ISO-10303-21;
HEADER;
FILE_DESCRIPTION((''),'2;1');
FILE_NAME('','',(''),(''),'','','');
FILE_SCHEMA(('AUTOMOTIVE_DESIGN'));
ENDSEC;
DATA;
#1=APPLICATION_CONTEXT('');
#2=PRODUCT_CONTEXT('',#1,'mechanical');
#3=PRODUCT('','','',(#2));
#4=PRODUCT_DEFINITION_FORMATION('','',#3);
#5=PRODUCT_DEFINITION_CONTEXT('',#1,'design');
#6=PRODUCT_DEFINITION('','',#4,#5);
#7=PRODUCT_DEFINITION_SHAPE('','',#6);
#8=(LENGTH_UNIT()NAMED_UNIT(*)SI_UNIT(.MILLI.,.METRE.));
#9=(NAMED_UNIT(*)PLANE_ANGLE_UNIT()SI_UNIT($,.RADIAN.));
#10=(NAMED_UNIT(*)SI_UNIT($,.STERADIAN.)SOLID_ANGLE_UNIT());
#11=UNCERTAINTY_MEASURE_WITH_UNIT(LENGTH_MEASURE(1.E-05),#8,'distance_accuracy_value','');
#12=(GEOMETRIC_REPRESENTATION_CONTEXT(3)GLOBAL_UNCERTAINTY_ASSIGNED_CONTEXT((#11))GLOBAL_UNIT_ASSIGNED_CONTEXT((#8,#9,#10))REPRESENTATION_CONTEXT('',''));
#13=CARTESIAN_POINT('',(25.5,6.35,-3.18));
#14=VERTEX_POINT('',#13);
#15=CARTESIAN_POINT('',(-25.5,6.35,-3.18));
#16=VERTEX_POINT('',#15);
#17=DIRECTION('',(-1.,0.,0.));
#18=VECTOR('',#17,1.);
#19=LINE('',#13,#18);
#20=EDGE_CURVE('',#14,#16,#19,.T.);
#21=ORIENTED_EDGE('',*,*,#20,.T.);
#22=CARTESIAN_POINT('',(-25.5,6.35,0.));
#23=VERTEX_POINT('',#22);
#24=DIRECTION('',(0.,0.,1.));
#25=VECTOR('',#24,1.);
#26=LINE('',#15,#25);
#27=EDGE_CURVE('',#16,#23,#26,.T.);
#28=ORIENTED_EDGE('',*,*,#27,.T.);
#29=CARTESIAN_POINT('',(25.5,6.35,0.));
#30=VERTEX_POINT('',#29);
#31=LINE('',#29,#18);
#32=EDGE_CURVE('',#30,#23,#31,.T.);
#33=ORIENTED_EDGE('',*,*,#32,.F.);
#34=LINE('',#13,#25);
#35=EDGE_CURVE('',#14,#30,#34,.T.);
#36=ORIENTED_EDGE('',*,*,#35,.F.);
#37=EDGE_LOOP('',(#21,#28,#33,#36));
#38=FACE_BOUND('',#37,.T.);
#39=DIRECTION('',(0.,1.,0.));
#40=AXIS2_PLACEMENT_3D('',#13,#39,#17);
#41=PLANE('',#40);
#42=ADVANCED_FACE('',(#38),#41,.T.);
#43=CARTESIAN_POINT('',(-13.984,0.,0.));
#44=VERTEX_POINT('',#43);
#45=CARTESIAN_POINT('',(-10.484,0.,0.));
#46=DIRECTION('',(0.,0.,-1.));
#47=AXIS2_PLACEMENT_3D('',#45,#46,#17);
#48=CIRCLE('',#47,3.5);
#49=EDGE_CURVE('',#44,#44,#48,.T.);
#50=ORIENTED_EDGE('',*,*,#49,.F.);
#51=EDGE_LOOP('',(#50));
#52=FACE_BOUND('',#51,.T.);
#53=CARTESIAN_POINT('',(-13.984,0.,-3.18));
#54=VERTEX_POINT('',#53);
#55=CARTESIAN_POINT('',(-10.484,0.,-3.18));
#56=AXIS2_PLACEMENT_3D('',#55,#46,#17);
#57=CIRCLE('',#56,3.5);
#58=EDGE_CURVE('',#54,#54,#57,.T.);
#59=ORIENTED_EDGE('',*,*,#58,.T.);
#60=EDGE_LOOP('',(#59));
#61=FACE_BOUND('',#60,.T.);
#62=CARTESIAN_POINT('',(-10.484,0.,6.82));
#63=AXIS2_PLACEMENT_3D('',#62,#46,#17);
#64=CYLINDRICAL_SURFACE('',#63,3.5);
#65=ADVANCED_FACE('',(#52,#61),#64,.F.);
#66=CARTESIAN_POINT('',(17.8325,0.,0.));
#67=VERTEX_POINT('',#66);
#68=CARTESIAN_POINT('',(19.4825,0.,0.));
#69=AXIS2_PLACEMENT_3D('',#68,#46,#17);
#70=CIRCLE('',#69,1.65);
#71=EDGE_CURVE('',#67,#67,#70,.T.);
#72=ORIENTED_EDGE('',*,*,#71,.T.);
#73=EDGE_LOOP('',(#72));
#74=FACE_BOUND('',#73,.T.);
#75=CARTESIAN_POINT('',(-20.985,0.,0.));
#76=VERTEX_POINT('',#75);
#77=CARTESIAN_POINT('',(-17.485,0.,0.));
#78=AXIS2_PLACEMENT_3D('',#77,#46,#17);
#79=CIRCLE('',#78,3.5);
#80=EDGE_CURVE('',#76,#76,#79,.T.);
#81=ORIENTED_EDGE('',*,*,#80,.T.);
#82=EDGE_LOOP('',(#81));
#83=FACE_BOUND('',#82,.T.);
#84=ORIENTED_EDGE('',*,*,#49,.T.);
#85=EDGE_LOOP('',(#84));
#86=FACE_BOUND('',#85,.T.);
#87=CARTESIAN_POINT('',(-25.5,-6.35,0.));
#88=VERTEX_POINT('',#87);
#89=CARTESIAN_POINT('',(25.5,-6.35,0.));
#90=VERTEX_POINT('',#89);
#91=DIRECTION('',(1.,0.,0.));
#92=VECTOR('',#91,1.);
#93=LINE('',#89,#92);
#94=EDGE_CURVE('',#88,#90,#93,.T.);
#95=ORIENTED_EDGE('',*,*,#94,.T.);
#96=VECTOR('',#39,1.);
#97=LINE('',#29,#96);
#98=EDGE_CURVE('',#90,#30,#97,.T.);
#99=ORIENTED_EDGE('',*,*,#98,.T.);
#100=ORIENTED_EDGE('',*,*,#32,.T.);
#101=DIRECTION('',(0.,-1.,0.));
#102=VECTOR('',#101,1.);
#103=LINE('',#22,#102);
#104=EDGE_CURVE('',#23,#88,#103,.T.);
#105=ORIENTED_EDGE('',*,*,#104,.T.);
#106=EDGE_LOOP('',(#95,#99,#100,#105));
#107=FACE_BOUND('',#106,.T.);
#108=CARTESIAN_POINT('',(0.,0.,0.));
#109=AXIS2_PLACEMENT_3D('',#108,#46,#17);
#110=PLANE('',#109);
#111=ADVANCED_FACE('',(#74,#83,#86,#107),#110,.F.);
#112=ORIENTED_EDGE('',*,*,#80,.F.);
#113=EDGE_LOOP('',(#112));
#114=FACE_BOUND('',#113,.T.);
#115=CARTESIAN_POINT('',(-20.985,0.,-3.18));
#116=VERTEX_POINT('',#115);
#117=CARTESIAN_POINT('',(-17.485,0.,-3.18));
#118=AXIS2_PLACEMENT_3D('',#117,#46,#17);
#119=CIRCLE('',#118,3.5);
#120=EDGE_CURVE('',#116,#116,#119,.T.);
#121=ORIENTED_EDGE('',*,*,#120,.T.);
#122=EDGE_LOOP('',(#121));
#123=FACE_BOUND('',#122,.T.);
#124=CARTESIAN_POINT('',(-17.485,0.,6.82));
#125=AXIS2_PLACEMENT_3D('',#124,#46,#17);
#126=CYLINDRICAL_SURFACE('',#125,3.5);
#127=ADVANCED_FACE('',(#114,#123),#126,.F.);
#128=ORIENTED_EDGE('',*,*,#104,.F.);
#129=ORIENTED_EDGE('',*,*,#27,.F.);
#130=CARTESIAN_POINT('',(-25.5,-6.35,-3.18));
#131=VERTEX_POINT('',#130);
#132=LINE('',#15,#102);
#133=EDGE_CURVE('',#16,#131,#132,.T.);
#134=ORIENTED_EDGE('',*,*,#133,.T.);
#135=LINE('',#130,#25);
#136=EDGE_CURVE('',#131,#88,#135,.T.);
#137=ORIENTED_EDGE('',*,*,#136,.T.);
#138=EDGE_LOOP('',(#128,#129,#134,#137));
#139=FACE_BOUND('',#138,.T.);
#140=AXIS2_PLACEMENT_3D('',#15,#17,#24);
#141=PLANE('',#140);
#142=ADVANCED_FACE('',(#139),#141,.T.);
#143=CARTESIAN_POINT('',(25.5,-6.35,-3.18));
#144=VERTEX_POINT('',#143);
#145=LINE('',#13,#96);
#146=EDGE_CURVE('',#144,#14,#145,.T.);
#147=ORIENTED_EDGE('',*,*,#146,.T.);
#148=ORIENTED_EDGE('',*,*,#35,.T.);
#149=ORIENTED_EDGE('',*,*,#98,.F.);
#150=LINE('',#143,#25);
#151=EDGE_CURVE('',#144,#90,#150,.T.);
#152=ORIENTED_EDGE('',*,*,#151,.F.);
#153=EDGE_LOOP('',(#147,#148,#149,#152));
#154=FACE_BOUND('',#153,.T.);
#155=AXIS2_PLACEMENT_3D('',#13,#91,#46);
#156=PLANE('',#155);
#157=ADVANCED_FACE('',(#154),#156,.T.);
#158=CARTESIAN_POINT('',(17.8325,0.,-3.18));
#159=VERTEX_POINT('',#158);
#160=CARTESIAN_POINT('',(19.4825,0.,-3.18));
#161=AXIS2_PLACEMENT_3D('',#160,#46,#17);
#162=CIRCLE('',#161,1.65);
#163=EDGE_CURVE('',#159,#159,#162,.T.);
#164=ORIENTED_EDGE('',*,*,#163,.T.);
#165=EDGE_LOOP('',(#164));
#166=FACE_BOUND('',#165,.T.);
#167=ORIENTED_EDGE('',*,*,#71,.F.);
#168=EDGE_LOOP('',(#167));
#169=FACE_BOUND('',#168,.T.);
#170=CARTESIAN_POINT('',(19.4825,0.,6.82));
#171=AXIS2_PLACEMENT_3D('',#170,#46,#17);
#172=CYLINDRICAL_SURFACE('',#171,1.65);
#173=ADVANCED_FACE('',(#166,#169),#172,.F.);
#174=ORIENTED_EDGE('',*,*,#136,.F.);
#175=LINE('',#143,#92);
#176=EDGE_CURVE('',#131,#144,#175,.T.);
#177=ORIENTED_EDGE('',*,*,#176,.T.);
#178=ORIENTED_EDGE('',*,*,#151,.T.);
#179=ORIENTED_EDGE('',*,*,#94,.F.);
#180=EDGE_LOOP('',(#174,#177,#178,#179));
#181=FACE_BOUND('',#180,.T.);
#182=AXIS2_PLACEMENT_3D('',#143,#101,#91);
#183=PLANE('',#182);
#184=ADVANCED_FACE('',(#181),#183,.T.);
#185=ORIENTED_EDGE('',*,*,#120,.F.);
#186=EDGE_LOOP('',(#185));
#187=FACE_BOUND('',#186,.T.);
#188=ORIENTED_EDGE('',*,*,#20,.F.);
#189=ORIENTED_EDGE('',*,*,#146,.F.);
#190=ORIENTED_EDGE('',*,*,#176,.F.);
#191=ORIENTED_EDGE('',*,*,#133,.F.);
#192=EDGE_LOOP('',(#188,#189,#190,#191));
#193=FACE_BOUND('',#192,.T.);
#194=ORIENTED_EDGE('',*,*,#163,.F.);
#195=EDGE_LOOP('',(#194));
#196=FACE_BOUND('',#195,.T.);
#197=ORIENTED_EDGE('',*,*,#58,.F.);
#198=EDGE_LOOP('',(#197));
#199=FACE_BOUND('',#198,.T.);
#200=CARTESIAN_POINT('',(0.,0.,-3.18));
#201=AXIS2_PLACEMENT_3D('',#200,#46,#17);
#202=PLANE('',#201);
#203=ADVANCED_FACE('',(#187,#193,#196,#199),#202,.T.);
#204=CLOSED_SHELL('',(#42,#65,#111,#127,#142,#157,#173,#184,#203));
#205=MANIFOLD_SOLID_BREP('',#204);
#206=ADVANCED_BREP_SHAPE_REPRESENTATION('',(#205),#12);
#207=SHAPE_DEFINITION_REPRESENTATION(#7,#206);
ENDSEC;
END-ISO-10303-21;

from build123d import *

# Parameters (mm, degrees)
ESBO_O1_W             = 51
ESBO_O1_H             = 12.7
FLANGE_BASE1_DEPTH    = 3.18
ESBO_O2_R             = 3.5
ESBO_O2_R_2           = 1.65
CORTE_EXTRUS_O1_DEPTH = 10


# Sheet-metal steps are written as plain solids
with BuildPart() as part:
    # Esboço1 → Flange-base1 (new body)
    with BuildSketch(Plane.XY):
        Rectangle(ESBO_O1_W, ESBO_O1_H)
    extrude(amount=-FLANGE_BASE1_DEPTH)

    # Esboço2 → Corte-extrusão1 (cut)
    with BuildSketch(Plane(origin=(0, 0, -3.18), x_dir=(-1, 0, 0), z_dir=(0, 0, -1))):
        with Locations((17.485, 0)):
            Circle(ESBO_O2_R)
        with Locations((-19.4825, 0)):
            Circle(ESBO_O2_R_2)
        with Locations((10.484, 0)):
            Circle(ESBO_O2_R)
    extrude(amount=-CORTE_EXTRUS_O1_DEPTH, mode=Mode.SUBTRACT)


solid = part.part
